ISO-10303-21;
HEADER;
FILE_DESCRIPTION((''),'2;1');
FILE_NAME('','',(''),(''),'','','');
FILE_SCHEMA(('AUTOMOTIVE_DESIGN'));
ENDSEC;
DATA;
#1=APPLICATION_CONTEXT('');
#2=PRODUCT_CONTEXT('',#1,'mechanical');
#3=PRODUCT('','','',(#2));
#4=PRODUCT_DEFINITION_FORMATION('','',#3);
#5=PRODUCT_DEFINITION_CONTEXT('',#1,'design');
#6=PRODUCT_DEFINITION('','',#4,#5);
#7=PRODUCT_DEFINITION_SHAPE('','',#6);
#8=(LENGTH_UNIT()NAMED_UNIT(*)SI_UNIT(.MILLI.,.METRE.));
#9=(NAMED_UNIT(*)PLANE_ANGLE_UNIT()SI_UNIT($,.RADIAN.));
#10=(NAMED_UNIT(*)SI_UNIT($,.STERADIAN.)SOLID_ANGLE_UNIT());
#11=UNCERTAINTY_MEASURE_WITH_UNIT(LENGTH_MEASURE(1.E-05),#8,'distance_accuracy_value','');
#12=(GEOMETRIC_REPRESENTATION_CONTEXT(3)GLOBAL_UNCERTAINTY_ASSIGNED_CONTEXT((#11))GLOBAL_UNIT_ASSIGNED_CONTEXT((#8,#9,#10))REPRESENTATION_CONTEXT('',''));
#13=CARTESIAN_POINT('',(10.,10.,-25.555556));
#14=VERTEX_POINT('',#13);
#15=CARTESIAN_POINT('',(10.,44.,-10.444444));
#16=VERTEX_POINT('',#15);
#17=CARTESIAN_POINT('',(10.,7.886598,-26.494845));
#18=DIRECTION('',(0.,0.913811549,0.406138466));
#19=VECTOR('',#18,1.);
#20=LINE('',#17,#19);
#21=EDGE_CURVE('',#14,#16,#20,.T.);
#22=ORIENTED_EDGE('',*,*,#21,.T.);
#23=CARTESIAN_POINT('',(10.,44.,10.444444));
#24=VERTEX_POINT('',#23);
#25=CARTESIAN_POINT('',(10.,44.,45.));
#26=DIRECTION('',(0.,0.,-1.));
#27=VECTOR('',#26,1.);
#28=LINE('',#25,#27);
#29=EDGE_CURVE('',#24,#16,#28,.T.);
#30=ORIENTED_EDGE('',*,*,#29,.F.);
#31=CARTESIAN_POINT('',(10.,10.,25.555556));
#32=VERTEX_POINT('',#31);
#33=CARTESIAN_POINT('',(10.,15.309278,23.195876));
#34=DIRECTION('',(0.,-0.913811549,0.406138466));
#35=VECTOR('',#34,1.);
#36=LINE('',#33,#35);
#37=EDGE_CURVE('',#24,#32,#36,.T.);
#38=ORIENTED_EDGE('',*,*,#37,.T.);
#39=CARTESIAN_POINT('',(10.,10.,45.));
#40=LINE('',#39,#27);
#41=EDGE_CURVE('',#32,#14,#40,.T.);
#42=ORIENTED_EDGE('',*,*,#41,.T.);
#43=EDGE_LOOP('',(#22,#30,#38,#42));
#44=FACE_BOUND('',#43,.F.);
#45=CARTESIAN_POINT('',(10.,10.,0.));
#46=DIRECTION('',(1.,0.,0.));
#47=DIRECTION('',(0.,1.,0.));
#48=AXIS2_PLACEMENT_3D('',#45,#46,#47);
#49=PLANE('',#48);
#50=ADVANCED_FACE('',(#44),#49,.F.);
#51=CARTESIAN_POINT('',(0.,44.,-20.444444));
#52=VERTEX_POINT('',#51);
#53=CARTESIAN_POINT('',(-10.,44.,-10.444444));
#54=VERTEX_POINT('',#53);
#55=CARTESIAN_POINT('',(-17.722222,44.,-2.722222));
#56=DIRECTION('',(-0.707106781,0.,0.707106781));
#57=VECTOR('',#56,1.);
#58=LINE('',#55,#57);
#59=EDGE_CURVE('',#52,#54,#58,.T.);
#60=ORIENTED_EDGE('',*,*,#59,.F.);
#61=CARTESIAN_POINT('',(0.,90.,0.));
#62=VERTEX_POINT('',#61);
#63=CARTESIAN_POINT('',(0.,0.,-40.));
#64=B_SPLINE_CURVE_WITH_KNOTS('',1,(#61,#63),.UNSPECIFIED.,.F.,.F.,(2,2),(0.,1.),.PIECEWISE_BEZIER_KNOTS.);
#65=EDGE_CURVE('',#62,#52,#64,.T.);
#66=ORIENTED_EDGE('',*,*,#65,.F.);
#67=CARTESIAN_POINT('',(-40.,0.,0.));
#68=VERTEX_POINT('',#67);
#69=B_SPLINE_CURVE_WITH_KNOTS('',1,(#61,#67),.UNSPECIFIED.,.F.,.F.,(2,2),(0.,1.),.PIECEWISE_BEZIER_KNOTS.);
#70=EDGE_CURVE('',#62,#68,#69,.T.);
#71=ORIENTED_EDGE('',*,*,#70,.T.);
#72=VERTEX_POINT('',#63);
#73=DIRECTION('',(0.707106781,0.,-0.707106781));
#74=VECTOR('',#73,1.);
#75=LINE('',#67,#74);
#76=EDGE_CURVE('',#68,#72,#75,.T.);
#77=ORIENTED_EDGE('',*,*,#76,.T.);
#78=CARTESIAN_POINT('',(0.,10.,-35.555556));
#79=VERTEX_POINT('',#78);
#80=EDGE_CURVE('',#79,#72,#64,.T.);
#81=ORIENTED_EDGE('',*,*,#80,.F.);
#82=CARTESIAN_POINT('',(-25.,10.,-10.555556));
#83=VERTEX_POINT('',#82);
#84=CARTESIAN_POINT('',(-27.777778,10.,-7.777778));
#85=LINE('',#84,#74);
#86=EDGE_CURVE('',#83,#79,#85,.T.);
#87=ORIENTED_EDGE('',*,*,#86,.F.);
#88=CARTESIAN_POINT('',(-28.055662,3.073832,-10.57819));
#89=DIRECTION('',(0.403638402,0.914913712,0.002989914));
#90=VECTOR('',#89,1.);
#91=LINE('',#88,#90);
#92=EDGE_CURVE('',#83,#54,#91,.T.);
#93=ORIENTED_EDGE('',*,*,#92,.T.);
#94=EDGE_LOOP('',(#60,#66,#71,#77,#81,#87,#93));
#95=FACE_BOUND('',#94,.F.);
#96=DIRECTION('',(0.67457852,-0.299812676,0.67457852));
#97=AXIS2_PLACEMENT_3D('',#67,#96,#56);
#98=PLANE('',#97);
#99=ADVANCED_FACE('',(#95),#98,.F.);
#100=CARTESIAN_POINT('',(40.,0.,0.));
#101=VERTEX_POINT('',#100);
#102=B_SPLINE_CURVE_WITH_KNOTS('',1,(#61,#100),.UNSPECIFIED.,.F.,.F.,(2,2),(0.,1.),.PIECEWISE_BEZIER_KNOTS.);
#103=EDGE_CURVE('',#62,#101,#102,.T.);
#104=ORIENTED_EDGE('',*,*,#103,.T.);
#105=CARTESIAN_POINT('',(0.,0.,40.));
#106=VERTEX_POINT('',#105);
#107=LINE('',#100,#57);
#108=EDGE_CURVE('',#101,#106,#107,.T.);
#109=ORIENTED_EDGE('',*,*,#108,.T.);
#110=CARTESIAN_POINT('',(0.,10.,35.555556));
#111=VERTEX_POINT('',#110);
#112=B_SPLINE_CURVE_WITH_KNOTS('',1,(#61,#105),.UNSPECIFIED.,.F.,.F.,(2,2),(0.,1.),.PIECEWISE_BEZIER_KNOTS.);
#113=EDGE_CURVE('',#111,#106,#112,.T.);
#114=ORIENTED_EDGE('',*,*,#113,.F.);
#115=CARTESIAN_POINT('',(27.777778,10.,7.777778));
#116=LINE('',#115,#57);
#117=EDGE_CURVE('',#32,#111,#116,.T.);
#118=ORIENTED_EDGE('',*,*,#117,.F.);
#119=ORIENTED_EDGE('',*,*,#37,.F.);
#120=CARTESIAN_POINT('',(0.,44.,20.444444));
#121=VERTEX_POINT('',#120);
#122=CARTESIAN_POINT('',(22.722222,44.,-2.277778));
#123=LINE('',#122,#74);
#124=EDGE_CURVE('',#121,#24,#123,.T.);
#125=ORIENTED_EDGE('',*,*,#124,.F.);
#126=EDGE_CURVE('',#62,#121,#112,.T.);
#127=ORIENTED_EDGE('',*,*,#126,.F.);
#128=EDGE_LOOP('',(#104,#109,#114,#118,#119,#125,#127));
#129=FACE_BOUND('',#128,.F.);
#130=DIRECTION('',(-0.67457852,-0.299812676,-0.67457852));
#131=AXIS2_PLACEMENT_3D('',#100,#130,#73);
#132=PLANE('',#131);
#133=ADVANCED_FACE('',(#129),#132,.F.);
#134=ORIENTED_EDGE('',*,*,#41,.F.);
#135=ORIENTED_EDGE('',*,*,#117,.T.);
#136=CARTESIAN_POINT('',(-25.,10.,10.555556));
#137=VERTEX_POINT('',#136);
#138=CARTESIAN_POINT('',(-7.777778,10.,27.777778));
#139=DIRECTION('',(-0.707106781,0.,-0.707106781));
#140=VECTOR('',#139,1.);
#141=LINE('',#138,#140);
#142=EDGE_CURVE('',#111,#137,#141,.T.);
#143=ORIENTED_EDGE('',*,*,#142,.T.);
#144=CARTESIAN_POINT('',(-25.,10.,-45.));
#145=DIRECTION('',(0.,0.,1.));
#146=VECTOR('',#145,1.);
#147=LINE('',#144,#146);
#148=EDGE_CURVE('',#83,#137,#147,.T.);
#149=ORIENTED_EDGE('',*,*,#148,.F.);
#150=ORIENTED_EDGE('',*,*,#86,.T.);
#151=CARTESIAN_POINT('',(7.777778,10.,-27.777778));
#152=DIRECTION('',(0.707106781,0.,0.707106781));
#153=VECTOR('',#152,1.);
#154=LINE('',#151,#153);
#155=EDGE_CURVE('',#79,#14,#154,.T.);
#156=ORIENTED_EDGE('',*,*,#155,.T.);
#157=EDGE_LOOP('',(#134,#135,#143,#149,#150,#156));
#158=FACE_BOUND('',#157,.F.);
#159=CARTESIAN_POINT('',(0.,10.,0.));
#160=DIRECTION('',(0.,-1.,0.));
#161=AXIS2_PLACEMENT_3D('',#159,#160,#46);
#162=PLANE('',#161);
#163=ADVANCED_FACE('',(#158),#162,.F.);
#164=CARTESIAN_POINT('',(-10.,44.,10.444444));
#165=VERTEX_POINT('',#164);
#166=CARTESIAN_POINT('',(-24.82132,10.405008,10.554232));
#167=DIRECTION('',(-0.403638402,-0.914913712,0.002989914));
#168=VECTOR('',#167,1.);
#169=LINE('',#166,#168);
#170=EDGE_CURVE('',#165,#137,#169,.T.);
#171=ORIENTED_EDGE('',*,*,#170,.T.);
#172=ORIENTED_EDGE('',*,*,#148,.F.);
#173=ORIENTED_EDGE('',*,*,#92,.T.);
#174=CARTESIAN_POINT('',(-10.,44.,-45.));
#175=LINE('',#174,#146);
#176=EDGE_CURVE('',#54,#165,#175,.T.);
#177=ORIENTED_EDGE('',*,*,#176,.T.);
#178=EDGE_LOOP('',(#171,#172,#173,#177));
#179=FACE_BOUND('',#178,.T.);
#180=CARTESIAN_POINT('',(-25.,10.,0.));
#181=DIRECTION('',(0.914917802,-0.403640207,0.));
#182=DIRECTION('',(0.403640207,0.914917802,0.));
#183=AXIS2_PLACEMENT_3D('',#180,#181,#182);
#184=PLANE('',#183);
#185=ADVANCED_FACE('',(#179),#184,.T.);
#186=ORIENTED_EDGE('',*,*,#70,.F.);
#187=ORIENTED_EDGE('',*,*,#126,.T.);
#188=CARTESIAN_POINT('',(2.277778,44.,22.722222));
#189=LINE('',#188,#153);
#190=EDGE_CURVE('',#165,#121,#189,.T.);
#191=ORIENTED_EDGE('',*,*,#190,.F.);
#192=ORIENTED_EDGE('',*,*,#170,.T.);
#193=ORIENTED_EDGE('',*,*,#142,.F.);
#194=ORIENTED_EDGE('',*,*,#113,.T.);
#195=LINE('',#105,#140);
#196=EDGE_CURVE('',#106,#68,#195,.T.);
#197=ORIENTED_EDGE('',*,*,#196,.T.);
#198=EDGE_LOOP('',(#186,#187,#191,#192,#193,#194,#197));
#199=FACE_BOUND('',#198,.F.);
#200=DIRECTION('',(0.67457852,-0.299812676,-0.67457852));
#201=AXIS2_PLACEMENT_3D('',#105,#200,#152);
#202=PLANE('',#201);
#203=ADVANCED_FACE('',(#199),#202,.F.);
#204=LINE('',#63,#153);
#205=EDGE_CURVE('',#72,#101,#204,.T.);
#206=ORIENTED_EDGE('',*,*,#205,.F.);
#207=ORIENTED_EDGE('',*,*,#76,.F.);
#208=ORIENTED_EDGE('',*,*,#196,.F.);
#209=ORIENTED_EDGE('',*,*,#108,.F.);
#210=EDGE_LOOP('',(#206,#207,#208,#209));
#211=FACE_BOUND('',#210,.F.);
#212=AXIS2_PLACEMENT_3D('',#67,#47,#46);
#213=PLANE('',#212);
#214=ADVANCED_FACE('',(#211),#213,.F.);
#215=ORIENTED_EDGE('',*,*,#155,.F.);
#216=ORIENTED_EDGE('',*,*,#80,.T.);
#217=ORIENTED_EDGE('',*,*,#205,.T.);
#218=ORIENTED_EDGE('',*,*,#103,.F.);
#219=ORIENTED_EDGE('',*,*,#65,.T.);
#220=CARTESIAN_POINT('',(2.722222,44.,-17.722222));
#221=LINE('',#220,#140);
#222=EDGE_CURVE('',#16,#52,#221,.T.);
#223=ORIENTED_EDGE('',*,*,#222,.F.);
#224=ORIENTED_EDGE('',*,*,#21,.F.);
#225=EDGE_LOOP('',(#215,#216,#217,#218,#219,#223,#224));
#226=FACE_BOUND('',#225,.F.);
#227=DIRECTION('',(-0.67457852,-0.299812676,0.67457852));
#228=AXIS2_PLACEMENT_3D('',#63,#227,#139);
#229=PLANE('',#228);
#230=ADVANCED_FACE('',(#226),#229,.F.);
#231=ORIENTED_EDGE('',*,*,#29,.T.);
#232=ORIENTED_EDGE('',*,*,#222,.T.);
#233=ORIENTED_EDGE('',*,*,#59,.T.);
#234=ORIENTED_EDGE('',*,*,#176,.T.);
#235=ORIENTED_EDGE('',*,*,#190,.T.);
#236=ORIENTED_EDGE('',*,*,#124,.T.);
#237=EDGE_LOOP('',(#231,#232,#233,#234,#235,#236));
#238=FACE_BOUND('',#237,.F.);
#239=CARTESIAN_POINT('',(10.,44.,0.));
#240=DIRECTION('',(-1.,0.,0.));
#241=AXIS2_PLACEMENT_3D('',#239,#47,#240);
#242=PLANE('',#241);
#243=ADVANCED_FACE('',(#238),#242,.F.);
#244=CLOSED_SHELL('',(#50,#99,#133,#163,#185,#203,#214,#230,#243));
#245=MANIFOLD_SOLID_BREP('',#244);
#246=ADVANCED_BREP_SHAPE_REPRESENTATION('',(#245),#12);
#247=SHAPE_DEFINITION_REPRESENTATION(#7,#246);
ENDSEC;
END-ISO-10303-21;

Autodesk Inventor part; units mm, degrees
ref_plane "YZ Plane" through (0, 0, 0) normal (1, 0, 0) x (0, 1, 0)
ref_plane "XY Plane" through (0, 0, 0) normal (0, 0, 1) x (1, 0, 0)
sketch "Эскиз1" plane through (0, 0, 0) normal (0, 1, 0) x (-1, 0, 0)
  circle A0 centre (0, 0) radius 40
  line L0 (40, 0) -> (0, -40)
  line L1 (0, -40) -> (-40, 0)
  line L2 (-40, 0) -> (0, 40)
  line L3 (0, 40) -> (40, 0)
  dimension "d0" = 80
ref_plane "РабПлоскость1" through (0, 90, 0) normal (0, 1, 0) x (-1, 0, 0)
sketch "Эскиз2" plane through (0, 90, 0) normal (0, 1, 0) x (-1, 0, 0)
  point P0 (0, 0)
  point P1 (0, 0)
loft "Лофт1" add profiles "Эскиз1" section 1 point at (0, 90, 0) contours L0 L1 L2 L3
sketch "Эскиз3" plane through (0, 0, 0) normal (0, 0, 1) x (1, 0, 0)
  line L0 (0, 0) -> (0, 10)
  line L1 (0, 90) -> (0, 0) projected
  line L2 (0, 10) -> (10, 10)
  line L3 (10, 10) -> (10, 44)
  line L4 (10, 44) -> (-10, 44)
  line L5 (0, 10) -> (-25, 10)
  line L6 (-25, 10) -> (-10, 44)
extrude "Выдавливание1" cut sketch "Эскиз3" against normal mid plane 90
